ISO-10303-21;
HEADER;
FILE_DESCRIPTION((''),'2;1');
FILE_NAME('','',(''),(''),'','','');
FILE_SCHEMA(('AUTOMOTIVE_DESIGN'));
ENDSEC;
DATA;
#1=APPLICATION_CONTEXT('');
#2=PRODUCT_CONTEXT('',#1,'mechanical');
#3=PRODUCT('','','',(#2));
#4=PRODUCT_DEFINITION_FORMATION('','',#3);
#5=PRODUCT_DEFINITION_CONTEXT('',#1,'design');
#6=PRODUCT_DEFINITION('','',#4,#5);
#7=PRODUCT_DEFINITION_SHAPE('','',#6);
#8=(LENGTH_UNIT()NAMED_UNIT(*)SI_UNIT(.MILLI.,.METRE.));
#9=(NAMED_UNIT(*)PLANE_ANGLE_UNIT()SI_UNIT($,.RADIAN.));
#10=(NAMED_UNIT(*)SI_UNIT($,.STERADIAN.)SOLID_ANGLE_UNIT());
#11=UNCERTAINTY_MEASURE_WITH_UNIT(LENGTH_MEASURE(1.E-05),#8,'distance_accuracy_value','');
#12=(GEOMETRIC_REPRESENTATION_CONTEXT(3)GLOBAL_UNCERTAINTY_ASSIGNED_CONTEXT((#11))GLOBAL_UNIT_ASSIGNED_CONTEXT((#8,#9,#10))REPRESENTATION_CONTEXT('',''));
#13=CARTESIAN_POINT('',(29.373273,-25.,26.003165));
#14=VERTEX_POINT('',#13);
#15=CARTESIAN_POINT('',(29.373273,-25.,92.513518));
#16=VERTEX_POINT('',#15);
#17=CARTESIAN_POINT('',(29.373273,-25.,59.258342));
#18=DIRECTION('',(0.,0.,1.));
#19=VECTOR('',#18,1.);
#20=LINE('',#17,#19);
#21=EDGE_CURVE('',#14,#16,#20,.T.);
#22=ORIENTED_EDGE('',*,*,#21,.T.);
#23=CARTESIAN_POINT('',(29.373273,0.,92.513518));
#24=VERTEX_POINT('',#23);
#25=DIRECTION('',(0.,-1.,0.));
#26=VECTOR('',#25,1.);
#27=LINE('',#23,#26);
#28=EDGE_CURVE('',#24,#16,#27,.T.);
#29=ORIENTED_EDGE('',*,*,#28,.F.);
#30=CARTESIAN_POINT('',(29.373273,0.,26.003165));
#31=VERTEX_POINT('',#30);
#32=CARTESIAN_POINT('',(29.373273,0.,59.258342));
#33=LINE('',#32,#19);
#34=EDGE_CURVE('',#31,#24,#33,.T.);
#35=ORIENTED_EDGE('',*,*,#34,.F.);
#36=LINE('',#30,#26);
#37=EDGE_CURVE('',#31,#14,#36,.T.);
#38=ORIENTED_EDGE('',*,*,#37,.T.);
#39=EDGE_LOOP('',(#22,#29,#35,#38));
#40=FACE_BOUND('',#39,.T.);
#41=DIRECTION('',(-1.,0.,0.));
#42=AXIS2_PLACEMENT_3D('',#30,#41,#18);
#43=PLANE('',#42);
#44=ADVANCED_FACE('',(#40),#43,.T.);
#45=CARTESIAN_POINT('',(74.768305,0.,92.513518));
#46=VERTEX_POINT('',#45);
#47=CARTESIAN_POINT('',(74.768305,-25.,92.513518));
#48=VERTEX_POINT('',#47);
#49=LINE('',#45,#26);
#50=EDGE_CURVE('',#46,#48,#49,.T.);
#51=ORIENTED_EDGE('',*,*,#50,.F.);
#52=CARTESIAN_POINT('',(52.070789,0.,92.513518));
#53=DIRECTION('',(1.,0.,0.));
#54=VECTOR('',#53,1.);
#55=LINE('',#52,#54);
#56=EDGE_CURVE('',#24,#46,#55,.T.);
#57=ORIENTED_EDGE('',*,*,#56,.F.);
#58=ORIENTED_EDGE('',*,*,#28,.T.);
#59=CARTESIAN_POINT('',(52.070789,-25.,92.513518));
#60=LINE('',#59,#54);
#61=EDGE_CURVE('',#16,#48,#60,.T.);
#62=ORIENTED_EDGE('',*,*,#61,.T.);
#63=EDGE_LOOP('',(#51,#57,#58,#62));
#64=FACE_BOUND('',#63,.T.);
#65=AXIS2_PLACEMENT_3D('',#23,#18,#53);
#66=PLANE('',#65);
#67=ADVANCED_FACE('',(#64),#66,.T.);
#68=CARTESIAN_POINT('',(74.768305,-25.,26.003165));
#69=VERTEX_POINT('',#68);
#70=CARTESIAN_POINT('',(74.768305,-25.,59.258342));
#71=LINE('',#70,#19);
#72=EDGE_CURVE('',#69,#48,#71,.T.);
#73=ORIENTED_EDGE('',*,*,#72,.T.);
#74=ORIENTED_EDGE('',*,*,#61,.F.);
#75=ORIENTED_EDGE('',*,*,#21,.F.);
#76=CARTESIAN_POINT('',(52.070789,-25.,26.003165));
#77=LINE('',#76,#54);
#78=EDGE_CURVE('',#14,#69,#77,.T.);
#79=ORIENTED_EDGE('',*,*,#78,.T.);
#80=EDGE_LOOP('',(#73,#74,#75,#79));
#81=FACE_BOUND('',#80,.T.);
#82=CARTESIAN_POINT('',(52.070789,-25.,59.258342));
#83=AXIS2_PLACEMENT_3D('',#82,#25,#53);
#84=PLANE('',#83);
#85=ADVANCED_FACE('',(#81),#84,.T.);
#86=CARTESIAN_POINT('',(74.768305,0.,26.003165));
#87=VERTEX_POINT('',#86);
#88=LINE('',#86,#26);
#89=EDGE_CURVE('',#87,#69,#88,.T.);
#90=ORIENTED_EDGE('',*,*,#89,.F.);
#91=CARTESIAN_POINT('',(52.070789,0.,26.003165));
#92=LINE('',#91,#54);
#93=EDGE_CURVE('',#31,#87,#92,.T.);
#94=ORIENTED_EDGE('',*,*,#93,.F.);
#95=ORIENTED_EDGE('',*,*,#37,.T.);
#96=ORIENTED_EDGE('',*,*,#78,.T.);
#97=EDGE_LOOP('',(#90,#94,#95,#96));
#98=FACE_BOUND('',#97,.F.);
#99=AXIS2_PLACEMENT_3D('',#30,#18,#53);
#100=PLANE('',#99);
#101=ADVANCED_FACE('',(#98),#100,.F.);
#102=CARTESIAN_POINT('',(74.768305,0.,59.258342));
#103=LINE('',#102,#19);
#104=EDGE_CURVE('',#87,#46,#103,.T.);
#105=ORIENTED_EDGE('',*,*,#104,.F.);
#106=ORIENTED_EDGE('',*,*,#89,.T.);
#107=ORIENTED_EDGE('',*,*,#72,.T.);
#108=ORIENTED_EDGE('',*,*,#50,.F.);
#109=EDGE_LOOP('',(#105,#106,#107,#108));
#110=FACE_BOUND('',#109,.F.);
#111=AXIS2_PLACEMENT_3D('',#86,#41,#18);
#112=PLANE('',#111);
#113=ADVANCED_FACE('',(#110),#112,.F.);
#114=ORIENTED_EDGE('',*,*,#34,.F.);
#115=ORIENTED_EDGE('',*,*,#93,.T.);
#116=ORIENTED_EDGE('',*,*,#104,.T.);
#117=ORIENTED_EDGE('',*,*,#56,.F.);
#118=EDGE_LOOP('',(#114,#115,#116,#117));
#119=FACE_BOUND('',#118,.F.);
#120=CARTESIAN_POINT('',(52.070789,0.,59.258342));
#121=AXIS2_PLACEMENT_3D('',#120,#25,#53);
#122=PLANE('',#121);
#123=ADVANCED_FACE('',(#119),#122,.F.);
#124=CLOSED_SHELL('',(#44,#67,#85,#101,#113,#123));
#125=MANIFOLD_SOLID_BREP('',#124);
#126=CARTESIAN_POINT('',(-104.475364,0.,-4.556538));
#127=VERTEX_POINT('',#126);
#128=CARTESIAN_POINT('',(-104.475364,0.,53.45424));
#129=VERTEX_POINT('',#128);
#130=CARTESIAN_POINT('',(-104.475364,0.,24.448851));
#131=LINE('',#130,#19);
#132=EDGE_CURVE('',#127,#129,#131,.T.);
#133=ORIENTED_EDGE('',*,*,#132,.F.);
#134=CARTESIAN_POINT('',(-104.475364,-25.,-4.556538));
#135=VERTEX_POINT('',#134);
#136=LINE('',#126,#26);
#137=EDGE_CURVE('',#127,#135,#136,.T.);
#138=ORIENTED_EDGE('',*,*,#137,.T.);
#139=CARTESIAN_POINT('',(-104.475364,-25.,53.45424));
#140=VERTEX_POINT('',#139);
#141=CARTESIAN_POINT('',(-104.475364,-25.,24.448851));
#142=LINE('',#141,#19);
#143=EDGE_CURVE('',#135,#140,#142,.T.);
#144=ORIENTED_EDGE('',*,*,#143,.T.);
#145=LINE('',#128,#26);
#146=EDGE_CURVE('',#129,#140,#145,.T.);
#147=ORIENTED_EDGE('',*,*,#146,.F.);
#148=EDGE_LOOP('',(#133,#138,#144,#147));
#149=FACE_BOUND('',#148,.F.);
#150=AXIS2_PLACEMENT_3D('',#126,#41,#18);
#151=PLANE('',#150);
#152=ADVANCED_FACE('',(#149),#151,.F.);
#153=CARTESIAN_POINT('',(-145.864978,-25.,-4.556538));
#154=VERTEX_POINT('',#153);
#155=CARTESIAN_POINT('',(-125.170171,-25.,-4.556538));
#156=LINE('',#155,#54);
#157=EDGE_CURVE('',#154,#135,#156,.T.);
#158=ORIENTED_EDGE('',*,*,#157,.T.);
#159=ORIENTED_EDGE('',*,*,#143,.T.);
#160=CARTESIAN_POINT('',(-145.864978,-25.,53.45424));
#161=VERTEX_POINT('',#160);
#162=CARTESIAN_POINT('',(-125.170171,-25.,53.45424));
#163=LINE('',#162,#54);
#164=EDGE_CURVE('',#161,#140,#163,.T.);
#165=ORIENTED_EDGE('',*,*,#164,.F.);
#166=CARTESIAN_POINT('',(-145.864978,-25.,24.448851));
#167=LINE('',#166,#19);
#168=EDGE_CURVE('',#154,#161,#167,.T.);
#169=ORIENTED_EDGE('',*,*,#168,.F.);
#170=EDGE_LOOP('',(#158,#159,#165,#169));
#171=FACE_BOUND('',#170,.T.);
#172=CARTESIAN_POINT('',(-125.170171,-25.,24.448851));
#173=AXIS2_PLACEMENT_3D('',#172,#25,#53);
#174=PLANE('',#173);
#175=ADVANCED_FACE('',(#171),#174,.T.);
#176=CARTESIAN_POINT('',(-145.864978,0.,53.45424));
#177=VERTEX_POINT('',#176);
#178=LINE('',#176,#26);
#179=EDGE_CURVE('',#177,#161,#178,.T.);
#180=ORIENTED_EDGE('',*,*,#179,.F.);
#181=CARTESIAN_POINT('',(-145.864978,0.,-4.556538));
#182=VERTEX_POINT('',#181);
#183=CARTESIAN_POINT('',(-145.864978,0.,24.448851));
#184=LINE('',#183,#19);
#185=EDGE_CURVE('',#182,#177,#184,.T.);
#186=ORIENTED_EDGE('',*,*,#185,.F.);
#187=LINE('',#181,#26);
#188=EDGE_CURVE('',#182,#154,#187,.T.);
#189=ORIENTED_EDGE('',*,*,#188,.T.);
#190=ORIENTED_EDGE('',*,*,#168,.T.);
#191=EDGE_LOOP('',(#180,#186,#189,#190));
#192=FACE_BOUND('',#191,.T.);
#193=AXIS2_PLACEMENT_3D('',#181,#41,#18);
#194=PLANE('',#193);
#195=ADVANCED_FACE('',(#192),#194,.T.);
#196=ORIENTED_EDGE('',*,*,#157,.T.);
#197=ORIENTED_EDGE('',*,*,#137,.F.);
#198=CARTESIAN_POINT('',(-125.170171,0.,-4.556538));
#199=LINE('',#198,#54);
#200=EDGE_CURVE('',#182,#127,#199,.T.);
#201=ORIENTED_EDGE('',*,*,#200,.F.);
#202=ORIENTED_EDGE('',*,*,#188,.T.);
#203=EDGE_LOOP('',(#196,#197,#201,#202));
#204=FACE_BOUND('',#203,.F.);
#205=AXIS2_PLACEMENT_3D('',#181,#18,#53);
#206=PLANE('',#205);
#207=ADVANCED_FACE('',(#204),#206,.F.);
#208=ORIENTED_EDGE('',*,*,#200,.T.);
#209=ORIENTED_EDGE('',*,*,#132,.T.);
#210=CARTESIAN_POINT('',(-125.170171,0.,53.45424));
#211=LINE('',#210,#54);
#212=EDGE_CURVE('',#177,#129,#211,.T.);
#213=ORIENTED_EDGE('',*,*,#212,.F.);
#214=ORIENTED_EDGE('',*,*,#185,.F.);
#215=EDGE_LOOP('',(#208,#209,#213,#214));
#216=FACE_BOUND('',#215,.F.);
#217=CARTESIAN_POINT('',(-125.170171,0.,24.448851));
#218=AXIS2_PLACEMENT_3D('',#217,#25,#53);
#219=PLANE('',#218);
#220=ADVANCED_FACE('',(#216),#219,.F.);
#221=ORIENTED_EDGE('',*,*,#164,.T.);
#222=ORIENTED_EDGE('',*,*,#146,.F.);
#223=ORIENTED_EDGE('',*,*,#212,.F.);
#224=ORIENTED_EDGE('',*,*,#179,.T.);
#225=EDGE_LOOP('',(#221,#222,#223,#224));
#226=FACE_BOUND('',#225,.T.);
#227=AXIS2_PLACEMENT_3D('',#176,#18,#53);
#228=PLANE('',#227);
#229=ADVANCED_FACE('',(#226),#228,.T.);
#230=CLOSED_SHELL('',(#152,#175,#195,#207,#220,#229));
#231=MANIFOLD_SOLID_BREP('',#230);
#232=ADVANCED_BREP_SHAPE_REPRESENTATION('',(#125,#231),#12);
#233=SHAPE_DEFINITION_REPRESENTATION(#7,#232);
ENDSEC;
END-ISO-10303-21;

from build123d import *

# Parameters (mm, degrees)
F0_W     = 41.3896143436
F0_H     = 58.0107783899
F1_DEPTH = 25
F0_W_2   = 45.3950315714
F0_H_2   = 66.5103532374


# Not quite as in the source:
# - the program builds the solid bodies; features that only make, move or delete a surface that nothing else refers to are left out


with BuildPart() as f1:
    # F0 (on Front) → F1 (new body)
    with BuildSketch(Plane.XZ):
        with Locations((-125.1701712608, 24.4488511235)):
            Rectangle(F0_W, F0_H)
    extrude(amount=F1_DEPTH)


with BuildPart() as f1b:
    # F0 (on Front) → F1, piece 2 (new body)
    with BuildSketch(Plane.XZ):
        with Locations((52.0707890391, 59.2583417892)):
            Rectangle(F0_W_2, F0_H_2)
    extrude(amount=F1_DEPTH)


solid = Compound([f1.part, f1b.part])
